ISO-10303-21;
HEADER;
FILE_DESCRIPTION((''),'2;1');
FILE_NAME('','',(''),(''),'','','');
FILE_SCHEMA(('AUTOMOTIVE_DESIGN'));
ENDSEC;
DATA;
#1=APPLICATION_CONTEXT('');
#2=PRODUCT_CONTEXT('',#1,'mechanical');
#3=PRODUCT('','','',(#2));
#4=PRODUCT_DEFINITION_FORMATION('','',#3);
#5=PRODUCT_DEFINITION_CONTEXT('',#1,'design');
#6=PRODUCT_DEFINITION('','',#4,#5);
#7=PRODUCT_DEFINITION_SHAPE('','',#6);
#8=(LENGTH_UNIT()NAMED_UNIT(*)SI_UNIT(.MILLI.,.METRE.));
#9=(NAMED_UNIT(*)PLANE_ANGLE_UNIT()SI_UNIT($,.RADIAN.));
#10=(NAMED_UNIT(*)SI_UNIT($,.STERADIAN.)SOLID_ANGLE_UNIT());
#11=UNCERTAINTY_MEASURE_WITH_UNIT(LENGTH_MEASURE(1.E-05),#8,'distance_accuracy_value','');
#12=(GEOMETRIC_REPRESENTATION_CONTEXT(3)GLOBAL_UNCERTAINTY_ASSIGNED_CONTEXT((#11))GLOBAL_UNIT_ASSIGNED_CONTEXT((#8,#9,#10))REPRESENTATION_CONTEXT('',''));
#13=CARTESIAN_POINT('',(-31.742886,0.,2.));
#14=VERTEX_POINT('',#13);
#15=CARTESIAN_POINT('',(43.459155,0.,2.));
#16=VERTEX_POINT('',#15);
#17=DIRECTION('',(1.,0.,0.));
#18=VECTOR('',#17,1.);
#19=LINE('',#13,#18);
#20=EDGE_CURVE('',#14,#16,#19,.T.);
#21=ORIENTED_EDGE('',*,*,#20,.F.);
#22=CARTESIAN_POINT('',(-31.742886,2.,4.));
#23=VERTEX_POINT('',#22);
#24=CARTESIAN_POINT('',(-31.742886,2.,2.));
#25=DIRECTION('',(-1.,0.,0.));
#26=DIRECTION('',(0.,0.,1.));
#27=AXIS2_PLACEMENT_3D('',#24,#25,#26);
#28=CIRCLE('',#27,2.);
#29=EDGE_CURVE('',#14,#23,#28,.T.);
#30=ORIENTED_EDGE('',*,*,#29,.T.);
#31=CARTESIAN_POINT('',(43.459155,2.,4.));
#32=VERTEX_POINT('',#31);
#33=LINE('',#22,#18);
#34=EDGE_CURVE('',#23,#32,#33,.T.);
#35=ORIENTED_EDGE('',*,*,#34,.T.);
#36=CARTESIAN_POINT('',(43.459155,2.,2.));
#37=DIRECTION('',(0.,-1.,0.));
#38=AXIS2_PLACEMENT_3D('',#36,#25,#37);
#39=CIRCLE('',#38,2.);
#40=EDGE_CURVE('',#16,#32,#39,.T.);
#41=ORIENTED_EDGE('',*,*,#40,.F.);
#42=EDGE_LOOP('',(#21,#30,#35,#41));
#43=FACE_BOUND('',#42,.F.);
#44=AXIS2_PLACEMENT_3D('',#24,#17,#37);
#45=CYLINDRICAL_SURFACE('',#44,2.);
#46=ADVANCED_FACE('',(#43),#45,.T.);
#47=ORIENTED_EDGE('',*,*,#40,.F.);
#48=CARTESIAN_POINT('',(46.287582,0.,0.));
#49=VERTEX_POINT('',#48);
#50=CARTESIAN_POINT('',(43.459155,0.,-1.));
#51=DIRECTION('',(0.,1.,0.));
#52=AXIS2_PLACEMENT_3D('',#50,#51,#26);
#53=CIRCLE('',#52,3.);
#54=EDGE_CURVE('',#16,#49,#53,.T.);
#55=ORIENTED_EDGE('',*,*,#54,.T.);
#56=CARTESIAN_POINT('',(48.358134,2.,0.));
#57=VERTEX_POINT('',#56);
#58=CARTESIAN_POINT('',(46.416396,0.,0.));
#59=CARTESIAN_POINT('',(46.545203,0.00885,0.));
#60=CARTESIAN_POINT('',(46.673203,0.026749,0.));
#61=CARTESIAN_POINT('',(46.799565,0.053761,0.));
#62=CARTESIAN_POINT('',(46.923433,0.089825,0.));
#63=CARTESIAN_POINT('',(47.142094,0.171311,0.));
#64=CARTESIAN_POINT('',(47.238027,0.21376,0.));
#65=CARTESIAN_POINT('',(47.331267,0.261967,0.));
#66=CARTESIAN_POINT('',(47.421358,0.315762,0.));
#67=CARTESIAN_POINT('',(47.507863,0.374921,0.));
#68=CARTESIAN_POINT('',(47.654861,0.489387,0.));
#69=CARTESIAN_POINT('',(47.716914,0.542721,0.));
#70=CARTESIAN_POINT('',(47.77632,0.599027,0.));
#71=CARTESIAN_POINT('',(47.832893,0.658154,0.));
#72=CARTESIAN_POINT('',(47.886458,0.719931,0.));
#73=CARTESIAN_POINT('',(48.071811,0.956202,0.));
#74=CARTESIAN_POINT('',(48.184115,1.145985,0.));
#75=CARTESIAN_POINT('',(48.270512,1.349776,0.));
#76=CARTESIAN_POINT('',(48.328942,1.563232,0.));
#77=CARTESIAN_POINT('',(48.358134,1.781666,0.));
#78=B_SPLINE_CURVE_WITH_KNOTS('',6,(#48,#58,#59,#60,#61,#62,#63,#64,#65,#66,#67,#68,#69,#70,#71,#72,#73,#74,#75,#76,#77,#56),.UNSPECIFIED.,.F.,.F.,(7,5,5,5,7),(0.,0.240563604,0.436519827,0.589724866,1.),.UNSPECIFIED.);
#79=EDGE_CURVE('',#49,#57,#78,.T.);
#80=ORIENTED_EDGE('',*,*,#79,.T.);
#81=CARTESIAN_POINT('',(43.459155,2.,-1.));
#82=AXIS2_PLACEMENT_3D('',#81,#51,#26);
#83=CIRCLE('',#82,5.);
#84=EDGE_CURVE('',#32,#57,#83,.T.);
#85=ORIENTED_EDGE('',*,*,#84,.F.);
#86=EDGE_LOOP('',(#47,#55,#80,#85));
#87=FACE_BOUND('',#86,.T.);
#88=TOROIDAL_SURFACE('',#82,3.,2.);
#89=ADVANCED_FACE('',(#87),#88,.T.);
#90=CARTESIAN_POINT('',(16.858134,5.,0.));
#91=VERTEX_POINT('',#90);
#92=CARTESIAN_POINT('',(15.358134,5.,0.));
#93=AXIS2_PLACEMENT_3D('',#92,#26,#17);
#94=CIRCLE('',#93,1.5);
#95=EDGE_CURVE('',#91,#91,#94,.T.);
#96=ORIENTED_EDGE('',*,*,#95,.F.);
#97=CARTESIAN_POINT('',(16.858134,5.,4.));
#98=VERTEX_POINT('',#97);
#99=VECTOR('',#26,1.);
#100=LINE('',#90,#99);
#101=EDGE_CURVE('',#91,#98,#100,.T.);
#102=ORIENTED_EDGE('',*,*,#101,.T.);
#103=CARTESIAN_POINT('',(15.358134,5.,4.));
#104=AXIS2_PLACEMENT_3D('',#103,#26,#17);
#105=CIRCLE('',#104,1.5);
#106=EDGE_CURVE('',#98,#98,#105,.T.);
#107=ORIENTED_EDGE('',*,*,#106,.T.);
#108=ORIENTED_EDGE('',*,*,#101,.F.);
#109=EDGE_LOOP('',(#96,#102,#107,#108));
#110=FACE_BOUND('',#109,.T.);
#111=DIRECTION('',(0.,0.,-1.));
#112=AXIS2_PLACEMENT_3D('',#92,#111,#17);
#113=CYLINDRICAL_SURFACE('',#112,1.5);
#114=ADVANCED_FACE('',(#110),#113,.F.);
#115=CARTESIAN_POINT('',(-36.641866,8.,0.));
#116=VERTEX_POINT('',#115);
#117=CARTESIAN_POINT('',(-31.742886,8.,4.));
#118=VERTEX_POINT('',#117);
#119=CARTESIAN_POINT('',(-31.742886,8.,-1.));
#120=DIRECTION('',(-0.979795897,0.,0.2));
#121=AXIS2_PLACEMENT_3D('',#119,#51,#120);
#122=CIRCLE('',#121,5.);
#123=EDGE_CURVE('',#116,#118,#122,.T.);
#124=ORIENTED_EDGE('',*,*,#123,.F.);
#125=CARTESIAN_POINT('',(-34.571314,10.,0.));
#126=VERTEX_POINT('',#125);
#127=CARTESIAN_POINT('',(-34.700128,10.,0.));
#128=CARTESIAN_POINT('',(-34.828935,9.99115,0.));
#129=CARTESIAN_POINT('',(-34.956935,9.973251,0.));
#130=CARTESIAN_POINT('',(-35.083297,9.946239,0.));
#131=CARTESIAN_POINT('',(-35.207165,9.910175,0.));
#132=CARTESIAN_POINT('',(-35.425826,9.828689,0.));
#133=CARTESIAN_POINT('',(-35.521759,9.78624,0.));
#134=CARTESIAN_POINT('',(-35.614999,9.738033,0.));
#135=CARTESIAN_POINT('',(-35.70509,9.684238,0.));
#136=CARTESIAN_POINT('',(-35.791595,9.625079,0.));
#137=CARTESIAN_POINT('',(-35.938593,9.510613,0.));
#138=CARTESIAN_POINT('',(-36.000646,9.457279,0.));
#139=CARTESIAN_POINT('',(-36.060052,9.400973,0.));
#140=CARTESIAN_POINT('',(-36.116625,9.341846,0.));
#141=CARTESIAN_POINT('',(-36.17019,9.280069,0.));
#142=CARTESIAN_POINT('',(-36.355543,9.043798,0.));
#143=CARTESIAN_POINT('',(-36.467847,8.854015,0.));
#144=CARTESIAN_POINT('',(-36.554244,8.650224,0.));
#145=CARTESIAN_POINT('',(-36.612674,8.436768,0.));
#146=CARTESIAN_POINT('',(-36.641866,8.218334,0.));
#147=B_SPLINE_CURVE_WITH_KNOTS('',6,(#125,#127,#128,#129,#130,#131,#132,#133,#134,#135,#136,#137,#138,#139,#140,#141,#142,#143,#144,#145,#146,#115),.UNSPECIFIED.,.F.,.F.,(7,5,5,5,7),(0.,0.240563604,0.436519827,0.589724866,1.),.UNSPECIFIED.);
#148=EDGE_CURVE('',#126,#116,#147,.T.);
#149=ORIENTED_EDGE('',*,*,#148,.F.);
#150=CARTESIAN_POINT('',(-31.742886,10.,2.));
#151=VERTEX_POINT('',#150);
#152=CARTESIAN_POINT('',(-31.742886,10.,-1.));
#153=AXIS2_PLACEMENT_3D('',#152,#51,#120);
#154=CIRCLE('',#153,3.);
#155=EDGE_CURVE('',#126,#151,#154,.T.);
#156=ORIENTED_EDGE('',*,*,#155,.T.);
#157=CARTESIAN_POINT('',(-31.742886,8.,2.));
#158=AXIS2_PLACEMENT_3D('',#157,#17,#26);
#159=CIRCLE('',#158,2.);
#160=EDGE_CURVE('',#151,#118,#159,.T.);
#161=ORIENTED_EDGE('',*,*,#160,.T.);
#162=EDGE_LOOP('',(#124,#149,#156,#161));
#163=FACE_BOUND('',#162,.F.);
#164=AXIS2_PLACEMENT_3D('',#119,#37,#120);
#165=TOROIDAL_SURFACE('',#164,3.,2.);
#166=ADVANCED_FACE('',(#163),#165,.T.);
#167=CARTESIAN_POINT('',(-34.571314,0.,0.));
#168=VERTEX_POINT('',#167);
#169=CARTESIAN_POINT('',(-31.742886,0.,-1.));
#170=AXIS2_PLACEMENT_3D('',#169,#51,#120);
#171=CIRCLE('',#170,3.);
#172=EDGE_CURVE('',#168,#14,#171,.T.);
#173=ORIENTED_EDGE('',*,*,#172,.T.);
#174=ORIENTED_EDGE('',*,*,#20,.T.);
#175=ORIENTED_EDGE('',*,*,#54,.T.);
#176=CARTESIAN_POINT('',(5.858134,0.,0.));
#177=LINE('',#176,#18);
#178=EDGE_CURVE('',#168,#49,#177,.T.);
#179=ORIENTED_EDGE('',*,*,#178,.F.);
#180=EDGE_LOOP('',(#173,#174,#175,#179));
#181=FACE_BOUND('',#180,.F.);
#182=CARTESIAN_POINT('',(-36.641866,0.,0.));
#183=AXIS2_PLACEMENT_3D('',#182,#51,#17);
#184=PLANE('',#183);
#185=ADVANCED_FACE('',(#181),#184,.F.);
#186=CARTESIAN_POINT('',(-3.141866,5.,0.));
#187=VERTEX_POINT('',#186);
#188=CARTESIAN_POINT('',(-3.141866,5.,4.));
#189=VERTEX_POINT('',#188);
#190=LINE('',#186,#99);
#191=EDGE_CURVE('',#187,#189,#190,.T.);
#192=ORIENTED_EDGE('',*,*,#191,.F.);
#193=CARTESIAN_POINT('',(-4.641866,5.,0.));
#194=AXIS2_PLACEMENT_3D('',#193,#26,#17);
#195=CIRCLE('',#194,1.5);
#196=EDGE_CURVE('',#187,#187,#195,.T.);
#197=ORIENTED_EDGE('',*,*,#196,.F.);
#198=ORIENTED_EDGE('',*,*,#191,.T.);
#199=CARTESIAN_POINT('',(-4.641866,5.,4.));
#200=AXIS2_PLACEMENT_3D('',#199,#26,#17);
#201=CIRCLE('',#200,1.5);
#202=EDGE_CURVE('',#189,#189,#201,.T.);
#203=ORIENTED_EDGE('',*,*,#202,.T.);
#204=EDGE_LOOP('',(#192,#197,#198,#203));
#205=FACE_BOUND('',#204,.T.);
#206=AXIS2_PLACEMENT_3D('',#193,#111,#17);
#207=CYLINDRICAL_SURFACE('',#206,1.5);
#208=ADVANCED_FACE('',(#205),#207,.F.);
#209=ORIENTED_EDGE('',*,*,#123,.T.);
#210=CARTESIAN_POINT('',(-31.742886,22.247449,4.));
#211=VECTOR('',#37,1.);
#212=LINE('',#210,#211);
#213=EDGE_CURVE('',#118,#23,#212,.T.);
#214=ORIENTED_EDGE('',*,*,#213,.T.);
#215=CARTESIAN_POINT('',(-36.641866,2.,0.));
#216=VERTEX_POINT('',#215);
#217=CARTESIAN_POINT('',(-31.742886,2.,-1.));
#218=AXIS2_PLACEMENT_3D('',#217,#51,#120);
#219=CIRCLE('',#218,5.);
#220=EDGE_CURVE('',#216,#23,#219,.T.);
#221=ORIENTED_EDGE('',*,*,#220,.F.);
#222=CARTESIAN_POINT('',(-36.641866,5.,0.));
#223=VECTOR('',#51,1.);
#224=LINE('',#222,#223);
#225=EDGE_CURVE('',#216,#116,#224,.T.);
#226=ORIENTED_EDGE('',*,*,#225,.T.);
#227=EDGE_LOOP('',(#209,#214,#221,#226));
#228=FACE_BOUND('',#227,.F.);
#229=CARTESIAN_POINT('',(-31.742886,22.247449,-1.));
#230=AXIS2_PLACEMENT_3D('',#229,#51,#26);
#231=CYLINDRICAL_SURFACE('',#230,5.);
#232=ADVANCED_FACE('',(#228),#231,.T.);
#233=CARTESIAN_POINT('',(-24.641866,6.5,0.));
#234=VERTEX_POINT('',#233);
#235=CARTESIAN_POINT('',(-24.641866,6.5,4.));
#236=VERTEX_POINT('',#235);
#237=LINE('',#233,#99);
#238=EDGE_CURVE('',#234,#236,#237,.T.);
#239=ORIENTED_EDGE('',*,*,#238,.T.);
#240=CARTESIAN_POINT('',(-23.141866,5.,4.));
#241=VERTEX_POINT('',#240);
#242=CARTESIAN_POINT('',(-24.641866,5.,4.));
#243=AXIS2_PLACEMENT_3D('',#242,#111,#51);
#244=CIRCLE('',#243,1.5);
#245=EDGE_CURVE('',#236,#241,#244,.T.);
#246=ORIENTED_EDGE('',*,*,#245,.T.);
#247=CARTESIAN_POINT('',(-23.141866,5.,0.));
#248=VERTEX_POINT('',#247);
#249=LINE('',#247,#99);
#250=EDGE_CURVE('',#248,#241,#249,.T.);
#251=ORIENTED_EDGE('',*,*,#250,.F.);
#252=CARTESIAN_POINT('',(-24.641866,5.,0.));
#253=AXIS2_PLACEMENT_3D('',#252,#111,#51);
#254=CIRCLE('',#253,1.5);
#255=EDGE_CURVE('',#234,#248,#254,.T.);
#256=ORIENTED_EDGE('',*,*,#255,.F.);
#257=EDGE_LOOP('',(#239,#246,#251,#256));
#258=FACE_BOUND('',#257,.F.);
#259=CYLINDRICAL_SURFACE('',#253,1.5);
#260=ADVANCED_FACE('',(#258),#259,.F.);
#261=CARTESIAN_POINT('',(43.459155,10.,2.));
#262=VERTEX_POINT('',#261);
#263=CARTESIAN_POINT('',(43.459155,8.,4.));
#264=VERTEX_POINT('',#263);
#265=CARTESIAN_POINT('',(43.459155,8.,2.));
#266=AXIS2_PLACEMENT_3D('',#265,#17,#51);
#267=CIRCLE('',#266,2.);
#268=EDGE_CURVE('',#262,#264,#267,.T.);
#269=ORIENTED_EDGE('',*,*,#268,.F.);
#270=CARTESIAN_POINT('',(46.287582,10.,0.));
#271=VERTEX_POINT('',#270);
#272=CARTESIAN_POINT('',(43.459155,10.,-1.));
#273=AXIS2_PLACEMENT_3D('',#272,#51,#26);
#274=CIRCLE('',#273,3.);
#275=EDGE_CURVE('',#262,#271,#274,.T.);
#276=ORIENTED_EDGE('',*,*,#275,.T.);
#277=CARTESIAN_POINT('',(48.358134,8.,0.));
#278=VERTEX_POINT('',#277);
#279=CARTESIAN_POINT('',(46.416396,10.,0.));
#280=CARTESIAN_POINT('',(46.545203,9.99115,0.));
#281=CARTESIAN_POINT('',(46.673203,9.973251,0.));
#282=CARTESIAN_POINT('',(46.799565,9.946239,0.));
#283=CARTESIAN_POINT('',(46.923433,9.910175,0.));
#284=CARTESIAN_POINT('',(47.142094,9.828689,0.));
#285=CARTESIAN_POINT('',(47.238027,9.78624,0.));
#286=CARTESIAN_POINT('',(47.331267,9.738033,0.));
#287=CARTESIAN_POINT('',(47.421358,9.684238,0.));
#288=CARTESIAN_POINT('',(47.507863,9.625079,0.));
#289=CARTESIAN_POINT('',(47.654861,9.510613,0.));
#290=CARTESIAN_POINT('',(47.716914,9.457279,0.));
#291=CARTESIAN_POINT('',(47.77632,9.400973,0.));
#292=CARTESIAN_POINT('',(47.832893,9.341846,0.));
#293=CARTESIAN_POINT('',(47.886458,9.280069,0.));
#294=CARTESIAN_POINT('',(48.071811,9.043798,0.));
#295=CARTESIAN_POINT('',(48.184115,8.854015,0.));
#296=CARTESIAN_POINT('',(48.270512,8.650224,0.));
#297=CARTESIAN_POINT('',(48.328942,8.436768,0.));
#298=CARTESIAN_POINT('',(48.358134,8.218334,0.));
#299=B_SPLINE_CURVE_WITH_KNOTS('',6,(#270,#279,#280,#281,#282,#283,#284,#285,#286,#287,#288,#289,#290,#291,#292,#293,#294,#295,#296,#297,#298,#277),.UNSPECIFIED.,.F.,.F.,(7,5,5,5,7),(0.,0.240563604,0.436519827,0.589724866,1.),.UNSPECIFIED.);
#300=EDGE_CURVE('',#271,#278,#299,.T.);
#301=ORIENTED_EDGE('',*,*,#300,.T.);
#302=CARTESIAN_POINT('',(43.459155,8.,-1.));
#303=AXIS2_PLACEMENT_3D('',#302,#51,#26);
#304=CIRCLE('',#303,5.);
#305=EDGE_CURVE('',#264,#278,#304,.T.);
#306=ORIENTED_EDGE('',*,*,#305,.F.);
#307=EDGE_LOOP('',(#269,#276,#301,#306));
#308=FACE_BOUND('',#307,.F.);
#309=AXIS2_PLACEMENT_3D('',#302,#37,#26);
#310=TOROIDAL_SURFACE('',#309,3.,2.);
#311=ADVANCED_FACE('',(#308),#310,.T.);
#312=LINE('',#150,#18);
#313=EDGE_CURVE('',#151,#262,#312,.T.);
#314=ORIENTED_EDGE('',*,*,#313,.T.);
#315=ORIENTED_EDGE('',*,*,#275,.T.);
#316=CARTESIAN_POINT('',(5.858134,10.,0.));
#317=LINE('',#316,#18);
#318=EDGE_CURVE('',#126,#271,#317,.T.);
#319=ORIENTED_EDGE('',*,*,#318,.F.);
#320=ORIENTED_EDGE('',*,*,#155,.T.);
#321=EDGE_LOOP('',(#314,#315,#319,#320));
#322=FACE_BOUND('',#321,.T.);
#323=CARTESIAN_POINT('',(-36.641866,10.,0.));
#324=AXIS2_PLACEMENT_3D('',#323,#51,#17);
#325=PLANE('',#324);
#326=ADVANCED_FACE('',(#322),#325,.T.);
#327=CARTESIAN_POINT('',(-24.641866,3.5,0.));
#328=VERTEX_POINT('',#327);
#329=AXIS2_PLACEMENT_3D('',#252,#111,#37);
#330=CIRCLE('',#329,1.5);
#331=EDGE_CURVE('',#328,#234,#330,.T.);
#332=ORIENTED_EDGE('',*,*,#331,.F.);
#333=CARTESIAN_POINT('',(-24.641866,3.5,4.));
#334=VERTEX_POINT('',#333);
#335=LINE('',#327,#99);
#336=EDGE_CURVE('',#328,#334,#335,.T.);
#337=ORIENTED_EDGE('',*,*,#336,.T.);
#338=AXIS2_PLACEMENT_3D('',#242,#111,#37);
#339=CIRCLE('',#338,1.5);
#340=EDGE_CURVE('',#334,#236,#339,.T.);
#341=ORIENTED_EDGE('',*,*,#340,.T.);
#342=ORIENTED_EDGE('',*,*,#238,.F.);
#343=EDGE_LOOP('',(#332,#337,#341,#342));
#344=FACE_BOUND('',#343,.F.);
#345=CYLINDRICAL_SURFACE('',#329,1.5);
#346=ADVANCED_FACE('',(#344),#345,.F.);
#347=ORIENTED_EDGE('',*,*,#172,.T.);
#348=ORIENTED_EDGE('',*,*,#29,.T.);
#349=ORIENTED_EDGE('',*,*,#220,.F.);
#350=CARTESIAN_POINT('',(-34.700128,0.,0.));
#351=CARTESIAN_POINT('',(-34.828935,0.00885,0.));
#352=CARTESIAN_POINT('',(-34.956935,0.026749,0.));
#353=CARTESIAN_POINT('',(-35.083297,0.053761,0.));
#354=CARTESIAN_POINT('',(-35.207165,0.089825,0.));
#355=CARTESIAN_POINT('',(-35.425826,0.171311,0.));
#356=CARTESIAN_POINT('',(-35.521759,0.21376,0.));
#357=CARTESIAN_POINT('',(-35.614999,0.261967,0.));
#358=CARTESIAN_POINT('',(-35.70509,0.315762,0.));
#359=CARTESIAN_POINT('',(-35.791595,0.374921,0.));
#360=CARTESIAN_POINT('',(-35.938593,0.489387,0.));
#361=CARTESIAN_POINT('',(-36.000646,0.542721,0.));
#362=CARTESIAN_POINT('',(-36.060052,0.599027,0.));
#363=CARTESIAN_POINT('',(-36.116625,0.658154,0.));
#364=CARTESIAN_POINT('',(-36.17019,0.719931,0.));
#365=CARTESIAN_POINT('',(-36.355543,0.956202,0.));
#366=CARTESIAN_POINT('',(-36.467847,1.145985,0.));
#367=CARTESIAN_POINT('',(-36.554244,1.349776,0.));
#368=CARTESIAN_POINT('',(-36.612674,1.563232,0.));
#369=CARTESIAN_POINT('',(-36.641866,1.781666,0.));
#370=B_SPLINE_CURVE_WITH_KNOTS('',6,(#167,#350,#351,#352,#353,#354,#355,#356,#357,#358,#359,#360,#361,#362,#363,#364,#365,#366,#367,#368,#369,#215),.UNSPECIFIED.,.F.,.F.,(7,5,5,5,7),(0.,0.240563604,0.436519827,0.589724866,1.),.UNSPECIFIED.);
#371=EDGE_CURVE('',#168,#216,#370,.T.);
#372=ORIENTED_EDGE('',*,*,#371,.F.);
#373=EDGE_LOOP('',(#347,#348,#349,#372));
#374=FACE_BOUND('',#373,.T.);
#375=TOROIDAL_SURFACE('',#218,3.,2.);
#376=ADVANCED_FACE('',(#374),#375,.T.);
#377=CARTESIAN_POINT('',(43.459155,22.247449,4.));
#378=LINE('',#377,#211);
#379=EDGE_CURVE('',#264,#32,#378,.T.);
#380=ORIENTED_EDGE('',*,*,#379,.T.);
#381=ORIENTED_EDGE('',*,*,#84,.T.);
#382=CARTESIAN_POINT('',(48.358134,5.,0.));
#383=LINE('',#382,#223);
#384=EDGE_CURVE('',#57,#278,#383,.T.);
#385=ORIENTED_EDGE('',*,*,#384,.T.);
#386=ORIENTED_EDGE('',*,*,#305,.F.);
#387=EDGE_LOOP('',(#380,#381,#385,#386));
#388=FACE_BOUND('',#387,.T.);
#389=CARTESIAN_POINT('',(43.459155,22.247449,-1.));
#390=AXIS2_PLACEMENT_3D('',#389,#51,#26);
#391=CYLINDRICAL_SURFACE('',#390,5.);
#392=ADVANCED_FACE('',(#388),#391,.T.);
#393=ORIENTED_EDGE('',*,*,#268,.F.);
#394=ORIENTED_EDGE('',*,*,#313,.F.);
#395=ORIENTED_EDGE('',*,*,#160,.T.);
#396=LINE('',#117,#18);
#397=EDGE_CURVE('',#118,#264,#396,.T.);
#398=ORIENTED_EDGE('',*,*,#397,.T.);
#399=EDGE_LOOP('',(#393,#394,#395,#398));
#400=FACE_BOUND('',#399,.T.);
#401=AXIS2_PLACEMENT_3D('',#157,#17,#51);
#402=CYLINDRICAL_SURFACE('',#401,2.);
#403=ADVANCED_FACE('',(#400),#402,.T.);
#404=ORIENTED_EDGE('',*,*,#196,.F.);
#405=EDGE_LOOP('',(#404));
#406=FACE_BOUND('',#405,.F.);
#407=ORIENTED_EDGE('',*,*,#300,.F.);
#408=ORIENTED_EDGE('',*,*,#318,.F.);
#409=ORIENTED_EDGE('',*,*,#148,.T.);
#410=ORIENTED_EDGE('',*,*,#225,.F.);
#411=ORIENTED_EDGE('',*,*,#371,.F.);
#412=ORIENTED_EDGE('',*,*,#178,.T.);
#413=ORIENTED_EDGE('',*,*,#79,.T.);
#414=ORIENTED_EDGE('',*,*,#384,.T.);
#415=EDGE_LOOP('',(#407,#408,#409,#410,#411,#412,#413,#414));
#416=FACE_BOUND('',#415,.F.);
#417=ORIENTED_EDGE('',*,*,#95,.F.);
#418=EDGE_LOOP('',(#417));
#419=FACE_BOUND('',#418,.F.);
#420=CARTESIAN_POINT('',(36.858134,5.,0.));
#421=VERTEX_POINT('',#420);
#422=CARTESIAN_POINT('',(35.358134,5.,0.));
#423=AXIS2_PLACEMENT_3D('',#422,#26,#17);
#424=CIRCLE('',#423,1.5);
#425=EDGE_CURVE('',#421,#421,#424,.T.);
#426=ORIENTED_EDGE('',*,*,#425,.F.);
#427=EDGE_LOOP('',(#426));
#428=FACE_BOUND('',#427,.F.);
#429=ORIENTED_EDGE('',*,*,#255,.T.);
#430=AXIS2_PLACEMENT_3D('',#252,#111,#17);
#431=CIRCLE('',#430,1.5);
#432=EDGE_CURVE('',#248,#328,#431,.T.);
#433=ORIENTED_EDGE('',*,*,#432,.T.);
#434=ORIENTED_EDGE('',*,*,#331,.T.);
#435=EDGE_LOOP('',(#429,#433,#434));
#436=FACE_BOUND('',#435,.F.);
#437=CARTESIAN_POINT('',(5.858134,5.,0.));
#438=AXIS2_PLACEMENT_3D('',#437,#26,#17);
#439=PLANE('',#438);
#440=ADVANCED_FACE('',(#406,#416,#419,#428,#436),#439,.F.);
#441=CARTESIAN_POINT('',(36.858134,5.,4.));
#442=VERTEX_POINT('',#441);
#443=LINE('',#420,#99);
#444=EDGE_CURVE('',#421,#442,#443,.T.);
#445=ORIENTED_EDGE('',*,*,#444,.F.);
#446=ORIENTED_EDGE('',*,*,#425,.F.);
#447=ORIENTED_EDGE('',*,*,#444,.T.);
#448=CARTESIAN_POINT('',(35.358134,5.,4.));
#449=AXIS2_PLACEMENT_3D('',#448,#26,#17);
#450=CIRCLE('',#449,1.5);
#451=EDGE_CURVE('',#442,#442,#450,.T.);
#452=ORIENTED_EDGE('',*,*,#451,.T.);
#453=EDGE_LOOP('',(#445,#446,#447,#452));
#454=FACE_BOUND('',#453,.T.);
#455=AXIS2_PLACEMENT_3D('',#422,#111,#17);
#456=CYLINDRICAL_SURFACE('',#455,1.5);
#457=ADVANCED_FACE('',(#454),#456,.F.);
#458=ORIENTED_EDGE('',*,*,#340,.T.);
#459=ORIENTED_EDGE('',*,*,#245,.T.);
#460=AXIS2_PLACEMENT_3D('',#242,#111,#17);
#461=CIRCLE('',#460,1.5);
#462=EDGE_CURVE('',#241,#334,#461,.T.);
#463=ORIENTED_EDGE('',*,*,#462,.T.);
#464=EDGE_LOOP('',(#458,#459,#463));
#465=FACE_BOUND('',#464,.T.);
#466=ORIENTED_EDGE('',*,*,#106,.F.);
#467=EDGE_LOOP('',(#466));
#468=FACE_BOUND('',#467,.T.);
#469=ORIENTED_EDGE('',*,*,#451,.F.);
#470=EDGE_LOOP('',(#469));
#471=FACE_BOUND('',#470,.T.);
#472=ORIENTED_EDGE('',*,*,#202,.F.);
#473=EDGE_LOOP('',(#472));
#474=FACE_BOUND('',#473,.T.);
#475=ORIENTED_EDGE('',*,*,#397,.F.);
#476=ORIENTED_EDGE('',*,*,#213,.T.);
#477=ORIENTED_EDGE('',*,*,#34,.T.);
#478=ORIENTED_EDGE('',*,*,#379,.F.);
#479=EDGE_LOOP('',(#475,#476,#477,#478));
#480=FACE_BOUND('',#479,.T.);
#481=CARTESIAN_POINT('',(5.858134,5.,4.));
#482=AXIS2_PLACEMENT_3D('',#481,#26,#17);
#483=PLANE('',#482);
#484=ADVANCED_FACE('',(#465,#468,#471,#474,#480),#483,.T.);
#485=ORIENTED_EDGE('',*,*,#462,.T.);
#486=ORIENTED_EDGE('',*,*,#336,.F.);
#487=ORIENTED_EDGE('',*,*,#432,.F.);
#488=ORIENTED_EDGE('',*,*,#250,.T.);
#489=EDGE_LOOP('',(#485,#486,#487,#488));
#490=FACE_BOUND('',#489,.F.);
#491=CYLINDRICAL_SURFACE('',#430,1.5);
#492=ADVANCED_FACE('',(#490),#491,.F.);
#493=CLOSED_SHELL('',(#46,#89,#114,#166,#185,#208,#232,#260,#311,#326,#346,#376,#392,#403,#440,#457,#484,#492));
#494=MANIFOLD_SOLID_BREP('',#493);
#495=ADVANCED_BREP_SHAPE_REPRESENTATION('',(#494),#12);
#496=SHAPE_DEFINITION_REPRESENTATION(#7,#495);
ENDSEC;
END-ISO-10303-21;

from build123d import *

# Parameters (mm, degrees)
F0_W        = 85
F0_H        = 10
F0_R        = 1.5
F1_DEPTH    = 4
F2_T1_DEPTH = 34.4948974279
F3_R        = 2


# Not quite as in the source:
# - a fillet or chamfer that OpenCascade refuses, or shapes differently, is made with other operations: its cross-section is extruded or revolved along the edge and cut away or added


with BuildPart() as f1:
    # F0 (on Top) → F1 (new body)
    with BuildSketch(Plane.XY):
        with Locations((5.8581340313, 5)):
            Rectangle(F0_W, F0_H)
        with BuildLine():
            ThreePointArc((-24.6418659687, 6.5), (-23.5812057969, 6.0606601718), (-23.1418659687, 5))
            ThreePointArc((-23.1418659687, 5), (-23.5812057969, 3.9393398282), (-24.6418659687, 3.5))
            ThreePointArc((-24.6418659687, 3.5), (-26.1418659687, 5), (-24.6418659687, 6.5))
        make_face(mode=Mode.SUBTRACT)
        with Locations((-4.6418659687, 5)):
            Circle(F0_R, mode=Mode.SUBTRACT)
        with Locations((15.3581340313, 5)):
            Circle(F0_R, mode=Mode.SUBTRACT)
        with Locations((35.3581340313, 5)):
            Circle(F0_R, mode=Mode.SUBTRACT)
    extrude(amount=F1_DEPTH)

    # F2: fillet of radius 5 on 2 edges, made by hand

    # F2_s2 → F2_t1 (cut)
    with BuildSketch(Plane.XZ.offset(-22.2474487139)):
        with BuildLine():
            ThreePointArc((-31.7428864831, 4), (-34.9051641433, 2.8729833462), (-36.6418659687, 0))
            Line((-36.6418659687, 0), (-36.6418659687, 4))
            Line((-36.6418659687, 4), (-31.7428864831, 4))
        make_face()
        with BuildLine():
            ThreePointArc((43.4591545457, 4), (46.6214322059, 2.8729833462), (48.3581340313, 0))
            Line((48.3581340313, 0), (48.3581340313, 4))
            Line((48.3581340313, 4), (43.4591545457, 4))
        make_face()
    extrude(amount=F2_T1_DEPTH, mode=Mode.SUBTRACT)

    # F3
    f3_edges = [f1.edges().sort_by_distance(p)[0] for p in [
        (5.858134, 10, 4),
        (5.858134, 0, 4),
        (-34.905164, 10, 2.872983),
        (46.621432, 10, 2.872983),
        (-34.905164, 0, 2.872983),
        (46.621432, 0, 2.872983),
    ]]
    fillet(f3_edges, radius=F3_R)


solid = f1.part
